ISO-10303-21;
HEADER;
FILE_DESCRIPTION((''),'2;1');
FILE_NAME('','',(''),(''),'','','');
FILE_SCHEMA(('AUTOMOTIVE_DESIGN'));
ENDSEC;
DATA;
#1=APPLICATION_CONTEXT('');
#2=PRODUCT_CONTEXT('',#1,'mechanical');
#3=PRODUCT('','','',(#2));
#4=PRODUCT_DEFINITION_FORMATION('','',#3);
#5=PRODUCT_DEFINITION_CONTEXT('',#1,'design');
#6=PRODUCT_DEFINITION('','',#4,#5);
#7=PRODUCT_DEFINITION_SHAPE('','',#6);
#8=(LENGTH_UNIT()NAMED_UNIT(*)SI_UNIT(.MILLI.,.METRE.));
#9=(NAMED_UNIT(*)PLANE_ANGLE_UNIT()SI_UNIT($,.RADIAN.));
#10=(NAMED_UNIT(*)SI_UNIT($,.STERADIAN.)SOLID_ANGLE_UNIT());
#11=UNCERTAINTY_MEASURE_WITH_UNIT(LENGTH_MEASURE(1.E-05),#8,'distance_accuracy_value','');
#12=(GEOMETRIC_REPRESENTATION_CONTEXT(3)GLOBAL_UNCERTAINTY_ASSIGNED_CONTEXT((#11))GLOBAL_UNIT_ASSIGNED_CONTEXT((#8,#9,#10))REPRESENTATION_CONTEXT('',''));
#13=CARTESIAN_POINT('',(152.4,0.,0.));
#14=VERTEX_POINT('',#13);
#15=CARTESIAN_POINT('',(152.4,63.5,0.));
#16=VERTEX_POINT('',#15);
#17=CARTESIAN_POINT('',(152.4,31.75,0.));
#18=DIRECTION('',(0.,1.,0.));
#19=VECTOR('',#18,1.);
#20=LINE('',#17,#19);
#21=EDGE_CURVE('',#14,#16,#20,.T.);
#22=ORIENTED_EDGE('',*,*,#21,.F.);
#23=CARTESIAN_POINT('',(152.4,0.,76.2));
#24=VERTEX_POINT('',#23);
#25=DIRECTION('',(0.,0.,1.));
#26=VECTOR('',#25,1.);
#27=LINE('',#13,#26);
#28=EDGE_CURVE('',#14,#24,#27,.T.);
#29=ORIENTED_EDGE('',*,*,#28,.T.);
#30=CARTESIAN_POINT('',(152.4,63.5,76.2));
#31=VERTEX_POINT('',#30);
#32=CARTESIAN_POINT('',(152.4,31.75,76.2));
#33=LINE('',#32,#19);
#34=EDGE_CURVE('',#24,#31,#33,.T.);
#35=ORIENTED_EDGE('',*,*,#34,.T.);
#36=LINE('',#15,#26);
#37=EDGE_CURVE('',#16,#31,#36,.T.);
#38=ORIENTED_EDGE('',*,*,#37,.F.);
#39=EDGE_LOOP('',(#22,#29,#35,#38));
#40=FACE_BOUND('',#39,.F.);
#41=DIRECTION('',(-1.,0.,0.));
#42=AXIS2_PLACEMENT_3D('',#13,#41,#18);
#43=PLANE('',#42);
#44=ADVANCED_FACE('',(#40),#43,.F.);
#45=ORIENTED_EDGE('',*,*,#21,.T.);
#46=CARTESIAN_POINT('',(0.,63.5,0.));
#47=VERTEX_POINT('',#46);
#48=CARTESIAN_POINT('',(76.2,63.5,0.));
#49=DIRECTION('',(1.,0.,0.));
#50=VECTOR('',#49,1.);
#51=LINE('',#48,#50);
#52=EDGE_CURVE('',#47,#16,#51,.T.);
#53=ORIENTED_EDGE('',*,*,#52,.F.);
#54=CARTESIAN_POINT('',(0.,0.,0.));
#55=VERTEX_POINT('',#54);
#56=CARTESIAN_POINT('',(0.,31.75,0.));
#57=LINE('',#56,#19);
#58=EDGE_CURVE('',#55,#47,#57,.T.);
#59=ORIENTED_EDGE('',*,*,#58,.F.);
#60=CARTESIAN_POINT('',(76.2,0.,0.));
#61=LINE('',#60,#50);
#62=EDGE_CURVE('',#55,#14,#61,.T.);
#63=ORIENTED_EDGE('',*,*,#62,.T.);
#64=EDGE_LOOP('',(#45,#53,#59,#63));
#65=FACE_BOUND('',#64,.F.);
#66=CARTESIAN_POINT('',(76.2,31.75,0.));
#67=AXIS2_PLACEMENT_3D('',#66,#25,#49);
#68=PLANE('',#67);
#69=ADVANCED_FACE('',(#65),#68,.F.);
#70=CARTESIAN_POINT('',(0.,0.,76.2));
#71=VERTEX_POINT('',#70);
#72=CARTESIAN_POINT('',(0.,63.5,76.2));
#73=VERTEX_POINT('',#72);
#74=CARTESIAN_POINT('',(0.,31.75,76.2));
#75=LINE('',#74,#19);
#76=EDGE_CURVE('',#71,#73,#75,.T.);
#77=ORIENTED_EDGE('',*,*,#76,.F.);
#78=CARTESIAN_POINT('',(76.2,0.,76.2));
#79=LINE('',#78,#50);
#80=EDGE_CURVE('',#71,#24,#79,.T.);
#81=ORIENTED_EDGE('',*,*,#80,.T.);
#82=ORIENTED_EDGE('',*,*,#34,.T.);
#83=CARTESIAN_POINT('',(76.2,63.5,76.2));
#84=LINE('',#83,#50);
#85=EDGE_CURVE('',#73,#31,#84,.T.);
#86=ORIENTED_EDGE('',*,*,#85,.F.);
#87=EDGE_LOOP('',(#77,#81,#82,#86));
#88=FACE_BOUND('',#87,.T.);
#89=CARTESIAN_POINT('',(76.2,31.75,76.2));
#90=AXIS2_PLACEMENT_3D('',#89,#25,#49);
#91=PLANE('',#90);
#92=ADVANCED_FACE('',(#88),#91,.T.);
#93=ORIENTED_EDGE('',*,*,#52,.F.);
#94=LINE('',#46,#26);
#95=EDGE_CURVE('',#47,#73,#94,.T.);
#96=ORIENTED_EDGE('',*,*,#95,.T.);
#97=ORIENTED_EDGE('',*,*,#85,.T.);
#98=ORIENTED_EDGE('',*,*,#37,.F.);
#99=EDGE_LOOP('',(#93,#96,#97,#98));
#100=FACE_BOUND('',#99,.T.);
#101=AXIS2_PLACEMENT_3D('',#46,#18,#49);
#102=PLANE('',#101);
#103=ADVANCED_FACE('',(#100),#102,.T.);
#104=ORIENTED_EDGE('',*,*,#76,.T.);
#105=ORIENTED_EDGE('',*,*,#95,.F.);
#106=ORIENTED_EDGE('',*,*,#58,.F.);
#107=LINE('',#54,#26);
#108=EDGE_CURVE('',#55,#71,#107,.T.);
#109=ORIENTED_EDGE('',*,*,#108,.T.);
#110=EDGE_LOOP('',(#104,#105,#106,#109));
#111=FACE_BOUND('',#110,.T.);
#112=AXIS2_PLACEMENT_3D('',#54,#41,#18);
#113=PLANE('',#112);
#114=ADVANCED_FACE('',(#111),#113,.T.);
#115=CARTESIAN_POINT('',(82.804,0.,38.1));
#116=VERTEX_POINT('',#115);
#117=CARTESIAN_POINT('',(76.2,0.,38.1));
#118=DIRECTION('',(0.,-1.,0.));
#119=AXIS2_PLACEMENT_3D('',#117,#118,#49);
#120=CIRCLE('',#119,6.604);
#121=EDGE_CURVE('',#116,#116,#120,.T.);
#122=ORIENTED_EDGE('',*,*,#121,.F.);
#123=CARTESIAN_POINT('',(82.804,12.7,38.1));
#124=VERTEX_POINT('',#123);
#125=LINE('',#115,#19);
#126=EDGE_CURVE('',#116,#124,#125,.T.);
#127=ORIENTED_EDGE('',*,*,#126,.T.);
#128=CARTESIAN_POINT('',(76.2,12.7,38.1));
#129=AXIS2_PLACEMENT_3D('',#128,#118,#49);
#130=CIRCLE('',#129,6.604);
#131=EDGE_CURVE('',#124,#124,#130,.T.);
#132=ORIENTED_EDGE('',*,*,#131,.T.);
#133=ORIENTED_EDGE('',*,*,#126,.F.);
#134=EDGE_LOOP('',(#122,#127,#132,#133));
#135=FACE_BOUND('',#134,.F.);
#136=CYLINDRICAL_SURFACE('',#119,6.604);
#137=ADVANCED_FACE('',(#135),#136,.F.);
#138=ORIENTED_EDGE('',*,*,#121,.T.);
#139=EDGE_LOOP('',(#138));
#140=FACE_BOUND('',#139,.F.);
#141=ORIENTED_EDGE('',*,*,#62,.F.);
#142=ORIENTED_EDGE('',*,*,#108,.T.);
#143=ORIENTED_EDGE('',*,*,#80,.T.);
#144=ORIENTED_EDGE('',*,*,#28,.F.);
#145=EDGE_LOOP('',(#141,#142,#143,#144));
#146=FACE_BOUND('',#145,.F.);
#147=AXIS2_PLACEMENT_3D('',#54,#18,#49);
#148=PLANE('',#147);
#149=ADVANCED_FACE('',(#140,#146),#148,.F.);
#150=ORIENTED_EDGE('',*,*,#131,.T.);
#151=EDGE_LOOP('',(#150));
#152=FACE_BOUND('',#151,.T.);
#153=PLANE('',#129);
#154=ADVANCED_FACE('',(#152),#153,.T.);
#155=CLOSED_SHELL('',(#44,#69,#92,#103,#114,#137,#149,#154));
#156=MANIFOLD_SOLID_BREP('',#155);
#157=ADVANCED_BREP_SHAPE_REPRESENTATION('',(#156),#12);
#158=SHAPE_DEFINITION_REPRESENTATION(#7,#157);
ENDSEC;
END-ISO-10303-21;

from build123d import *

# Parameters (mm, degrees)
F0_W     = 152.4
F0_H     = 63.5
F1_DEPTH = 76.2
F2_R     = 6.604
F3_DEPTH = 12.7


# Not quite as in the source:
# - a feature names something its author has since deleted; it is built from what else it names


with BuildPart() as f1:
    # F0 (on Top) → F1 (new body)
    with BuildSketch(Plane.XY):
        with Locations((76.2, 31.75)):
            Rectangle(F0_W, F0_H)
    extrude(amount=F1_DEPTH)

    # F2 (on face) → F3 (cut)
    with BuildSketch(Plane.XZ):
        with Locations((76.2, 38.1)):
            Circle(F2_R)
    extrude(amount=-F3_DEPTH, mode=Mode.SUBTRACT)


solid = f1.part
